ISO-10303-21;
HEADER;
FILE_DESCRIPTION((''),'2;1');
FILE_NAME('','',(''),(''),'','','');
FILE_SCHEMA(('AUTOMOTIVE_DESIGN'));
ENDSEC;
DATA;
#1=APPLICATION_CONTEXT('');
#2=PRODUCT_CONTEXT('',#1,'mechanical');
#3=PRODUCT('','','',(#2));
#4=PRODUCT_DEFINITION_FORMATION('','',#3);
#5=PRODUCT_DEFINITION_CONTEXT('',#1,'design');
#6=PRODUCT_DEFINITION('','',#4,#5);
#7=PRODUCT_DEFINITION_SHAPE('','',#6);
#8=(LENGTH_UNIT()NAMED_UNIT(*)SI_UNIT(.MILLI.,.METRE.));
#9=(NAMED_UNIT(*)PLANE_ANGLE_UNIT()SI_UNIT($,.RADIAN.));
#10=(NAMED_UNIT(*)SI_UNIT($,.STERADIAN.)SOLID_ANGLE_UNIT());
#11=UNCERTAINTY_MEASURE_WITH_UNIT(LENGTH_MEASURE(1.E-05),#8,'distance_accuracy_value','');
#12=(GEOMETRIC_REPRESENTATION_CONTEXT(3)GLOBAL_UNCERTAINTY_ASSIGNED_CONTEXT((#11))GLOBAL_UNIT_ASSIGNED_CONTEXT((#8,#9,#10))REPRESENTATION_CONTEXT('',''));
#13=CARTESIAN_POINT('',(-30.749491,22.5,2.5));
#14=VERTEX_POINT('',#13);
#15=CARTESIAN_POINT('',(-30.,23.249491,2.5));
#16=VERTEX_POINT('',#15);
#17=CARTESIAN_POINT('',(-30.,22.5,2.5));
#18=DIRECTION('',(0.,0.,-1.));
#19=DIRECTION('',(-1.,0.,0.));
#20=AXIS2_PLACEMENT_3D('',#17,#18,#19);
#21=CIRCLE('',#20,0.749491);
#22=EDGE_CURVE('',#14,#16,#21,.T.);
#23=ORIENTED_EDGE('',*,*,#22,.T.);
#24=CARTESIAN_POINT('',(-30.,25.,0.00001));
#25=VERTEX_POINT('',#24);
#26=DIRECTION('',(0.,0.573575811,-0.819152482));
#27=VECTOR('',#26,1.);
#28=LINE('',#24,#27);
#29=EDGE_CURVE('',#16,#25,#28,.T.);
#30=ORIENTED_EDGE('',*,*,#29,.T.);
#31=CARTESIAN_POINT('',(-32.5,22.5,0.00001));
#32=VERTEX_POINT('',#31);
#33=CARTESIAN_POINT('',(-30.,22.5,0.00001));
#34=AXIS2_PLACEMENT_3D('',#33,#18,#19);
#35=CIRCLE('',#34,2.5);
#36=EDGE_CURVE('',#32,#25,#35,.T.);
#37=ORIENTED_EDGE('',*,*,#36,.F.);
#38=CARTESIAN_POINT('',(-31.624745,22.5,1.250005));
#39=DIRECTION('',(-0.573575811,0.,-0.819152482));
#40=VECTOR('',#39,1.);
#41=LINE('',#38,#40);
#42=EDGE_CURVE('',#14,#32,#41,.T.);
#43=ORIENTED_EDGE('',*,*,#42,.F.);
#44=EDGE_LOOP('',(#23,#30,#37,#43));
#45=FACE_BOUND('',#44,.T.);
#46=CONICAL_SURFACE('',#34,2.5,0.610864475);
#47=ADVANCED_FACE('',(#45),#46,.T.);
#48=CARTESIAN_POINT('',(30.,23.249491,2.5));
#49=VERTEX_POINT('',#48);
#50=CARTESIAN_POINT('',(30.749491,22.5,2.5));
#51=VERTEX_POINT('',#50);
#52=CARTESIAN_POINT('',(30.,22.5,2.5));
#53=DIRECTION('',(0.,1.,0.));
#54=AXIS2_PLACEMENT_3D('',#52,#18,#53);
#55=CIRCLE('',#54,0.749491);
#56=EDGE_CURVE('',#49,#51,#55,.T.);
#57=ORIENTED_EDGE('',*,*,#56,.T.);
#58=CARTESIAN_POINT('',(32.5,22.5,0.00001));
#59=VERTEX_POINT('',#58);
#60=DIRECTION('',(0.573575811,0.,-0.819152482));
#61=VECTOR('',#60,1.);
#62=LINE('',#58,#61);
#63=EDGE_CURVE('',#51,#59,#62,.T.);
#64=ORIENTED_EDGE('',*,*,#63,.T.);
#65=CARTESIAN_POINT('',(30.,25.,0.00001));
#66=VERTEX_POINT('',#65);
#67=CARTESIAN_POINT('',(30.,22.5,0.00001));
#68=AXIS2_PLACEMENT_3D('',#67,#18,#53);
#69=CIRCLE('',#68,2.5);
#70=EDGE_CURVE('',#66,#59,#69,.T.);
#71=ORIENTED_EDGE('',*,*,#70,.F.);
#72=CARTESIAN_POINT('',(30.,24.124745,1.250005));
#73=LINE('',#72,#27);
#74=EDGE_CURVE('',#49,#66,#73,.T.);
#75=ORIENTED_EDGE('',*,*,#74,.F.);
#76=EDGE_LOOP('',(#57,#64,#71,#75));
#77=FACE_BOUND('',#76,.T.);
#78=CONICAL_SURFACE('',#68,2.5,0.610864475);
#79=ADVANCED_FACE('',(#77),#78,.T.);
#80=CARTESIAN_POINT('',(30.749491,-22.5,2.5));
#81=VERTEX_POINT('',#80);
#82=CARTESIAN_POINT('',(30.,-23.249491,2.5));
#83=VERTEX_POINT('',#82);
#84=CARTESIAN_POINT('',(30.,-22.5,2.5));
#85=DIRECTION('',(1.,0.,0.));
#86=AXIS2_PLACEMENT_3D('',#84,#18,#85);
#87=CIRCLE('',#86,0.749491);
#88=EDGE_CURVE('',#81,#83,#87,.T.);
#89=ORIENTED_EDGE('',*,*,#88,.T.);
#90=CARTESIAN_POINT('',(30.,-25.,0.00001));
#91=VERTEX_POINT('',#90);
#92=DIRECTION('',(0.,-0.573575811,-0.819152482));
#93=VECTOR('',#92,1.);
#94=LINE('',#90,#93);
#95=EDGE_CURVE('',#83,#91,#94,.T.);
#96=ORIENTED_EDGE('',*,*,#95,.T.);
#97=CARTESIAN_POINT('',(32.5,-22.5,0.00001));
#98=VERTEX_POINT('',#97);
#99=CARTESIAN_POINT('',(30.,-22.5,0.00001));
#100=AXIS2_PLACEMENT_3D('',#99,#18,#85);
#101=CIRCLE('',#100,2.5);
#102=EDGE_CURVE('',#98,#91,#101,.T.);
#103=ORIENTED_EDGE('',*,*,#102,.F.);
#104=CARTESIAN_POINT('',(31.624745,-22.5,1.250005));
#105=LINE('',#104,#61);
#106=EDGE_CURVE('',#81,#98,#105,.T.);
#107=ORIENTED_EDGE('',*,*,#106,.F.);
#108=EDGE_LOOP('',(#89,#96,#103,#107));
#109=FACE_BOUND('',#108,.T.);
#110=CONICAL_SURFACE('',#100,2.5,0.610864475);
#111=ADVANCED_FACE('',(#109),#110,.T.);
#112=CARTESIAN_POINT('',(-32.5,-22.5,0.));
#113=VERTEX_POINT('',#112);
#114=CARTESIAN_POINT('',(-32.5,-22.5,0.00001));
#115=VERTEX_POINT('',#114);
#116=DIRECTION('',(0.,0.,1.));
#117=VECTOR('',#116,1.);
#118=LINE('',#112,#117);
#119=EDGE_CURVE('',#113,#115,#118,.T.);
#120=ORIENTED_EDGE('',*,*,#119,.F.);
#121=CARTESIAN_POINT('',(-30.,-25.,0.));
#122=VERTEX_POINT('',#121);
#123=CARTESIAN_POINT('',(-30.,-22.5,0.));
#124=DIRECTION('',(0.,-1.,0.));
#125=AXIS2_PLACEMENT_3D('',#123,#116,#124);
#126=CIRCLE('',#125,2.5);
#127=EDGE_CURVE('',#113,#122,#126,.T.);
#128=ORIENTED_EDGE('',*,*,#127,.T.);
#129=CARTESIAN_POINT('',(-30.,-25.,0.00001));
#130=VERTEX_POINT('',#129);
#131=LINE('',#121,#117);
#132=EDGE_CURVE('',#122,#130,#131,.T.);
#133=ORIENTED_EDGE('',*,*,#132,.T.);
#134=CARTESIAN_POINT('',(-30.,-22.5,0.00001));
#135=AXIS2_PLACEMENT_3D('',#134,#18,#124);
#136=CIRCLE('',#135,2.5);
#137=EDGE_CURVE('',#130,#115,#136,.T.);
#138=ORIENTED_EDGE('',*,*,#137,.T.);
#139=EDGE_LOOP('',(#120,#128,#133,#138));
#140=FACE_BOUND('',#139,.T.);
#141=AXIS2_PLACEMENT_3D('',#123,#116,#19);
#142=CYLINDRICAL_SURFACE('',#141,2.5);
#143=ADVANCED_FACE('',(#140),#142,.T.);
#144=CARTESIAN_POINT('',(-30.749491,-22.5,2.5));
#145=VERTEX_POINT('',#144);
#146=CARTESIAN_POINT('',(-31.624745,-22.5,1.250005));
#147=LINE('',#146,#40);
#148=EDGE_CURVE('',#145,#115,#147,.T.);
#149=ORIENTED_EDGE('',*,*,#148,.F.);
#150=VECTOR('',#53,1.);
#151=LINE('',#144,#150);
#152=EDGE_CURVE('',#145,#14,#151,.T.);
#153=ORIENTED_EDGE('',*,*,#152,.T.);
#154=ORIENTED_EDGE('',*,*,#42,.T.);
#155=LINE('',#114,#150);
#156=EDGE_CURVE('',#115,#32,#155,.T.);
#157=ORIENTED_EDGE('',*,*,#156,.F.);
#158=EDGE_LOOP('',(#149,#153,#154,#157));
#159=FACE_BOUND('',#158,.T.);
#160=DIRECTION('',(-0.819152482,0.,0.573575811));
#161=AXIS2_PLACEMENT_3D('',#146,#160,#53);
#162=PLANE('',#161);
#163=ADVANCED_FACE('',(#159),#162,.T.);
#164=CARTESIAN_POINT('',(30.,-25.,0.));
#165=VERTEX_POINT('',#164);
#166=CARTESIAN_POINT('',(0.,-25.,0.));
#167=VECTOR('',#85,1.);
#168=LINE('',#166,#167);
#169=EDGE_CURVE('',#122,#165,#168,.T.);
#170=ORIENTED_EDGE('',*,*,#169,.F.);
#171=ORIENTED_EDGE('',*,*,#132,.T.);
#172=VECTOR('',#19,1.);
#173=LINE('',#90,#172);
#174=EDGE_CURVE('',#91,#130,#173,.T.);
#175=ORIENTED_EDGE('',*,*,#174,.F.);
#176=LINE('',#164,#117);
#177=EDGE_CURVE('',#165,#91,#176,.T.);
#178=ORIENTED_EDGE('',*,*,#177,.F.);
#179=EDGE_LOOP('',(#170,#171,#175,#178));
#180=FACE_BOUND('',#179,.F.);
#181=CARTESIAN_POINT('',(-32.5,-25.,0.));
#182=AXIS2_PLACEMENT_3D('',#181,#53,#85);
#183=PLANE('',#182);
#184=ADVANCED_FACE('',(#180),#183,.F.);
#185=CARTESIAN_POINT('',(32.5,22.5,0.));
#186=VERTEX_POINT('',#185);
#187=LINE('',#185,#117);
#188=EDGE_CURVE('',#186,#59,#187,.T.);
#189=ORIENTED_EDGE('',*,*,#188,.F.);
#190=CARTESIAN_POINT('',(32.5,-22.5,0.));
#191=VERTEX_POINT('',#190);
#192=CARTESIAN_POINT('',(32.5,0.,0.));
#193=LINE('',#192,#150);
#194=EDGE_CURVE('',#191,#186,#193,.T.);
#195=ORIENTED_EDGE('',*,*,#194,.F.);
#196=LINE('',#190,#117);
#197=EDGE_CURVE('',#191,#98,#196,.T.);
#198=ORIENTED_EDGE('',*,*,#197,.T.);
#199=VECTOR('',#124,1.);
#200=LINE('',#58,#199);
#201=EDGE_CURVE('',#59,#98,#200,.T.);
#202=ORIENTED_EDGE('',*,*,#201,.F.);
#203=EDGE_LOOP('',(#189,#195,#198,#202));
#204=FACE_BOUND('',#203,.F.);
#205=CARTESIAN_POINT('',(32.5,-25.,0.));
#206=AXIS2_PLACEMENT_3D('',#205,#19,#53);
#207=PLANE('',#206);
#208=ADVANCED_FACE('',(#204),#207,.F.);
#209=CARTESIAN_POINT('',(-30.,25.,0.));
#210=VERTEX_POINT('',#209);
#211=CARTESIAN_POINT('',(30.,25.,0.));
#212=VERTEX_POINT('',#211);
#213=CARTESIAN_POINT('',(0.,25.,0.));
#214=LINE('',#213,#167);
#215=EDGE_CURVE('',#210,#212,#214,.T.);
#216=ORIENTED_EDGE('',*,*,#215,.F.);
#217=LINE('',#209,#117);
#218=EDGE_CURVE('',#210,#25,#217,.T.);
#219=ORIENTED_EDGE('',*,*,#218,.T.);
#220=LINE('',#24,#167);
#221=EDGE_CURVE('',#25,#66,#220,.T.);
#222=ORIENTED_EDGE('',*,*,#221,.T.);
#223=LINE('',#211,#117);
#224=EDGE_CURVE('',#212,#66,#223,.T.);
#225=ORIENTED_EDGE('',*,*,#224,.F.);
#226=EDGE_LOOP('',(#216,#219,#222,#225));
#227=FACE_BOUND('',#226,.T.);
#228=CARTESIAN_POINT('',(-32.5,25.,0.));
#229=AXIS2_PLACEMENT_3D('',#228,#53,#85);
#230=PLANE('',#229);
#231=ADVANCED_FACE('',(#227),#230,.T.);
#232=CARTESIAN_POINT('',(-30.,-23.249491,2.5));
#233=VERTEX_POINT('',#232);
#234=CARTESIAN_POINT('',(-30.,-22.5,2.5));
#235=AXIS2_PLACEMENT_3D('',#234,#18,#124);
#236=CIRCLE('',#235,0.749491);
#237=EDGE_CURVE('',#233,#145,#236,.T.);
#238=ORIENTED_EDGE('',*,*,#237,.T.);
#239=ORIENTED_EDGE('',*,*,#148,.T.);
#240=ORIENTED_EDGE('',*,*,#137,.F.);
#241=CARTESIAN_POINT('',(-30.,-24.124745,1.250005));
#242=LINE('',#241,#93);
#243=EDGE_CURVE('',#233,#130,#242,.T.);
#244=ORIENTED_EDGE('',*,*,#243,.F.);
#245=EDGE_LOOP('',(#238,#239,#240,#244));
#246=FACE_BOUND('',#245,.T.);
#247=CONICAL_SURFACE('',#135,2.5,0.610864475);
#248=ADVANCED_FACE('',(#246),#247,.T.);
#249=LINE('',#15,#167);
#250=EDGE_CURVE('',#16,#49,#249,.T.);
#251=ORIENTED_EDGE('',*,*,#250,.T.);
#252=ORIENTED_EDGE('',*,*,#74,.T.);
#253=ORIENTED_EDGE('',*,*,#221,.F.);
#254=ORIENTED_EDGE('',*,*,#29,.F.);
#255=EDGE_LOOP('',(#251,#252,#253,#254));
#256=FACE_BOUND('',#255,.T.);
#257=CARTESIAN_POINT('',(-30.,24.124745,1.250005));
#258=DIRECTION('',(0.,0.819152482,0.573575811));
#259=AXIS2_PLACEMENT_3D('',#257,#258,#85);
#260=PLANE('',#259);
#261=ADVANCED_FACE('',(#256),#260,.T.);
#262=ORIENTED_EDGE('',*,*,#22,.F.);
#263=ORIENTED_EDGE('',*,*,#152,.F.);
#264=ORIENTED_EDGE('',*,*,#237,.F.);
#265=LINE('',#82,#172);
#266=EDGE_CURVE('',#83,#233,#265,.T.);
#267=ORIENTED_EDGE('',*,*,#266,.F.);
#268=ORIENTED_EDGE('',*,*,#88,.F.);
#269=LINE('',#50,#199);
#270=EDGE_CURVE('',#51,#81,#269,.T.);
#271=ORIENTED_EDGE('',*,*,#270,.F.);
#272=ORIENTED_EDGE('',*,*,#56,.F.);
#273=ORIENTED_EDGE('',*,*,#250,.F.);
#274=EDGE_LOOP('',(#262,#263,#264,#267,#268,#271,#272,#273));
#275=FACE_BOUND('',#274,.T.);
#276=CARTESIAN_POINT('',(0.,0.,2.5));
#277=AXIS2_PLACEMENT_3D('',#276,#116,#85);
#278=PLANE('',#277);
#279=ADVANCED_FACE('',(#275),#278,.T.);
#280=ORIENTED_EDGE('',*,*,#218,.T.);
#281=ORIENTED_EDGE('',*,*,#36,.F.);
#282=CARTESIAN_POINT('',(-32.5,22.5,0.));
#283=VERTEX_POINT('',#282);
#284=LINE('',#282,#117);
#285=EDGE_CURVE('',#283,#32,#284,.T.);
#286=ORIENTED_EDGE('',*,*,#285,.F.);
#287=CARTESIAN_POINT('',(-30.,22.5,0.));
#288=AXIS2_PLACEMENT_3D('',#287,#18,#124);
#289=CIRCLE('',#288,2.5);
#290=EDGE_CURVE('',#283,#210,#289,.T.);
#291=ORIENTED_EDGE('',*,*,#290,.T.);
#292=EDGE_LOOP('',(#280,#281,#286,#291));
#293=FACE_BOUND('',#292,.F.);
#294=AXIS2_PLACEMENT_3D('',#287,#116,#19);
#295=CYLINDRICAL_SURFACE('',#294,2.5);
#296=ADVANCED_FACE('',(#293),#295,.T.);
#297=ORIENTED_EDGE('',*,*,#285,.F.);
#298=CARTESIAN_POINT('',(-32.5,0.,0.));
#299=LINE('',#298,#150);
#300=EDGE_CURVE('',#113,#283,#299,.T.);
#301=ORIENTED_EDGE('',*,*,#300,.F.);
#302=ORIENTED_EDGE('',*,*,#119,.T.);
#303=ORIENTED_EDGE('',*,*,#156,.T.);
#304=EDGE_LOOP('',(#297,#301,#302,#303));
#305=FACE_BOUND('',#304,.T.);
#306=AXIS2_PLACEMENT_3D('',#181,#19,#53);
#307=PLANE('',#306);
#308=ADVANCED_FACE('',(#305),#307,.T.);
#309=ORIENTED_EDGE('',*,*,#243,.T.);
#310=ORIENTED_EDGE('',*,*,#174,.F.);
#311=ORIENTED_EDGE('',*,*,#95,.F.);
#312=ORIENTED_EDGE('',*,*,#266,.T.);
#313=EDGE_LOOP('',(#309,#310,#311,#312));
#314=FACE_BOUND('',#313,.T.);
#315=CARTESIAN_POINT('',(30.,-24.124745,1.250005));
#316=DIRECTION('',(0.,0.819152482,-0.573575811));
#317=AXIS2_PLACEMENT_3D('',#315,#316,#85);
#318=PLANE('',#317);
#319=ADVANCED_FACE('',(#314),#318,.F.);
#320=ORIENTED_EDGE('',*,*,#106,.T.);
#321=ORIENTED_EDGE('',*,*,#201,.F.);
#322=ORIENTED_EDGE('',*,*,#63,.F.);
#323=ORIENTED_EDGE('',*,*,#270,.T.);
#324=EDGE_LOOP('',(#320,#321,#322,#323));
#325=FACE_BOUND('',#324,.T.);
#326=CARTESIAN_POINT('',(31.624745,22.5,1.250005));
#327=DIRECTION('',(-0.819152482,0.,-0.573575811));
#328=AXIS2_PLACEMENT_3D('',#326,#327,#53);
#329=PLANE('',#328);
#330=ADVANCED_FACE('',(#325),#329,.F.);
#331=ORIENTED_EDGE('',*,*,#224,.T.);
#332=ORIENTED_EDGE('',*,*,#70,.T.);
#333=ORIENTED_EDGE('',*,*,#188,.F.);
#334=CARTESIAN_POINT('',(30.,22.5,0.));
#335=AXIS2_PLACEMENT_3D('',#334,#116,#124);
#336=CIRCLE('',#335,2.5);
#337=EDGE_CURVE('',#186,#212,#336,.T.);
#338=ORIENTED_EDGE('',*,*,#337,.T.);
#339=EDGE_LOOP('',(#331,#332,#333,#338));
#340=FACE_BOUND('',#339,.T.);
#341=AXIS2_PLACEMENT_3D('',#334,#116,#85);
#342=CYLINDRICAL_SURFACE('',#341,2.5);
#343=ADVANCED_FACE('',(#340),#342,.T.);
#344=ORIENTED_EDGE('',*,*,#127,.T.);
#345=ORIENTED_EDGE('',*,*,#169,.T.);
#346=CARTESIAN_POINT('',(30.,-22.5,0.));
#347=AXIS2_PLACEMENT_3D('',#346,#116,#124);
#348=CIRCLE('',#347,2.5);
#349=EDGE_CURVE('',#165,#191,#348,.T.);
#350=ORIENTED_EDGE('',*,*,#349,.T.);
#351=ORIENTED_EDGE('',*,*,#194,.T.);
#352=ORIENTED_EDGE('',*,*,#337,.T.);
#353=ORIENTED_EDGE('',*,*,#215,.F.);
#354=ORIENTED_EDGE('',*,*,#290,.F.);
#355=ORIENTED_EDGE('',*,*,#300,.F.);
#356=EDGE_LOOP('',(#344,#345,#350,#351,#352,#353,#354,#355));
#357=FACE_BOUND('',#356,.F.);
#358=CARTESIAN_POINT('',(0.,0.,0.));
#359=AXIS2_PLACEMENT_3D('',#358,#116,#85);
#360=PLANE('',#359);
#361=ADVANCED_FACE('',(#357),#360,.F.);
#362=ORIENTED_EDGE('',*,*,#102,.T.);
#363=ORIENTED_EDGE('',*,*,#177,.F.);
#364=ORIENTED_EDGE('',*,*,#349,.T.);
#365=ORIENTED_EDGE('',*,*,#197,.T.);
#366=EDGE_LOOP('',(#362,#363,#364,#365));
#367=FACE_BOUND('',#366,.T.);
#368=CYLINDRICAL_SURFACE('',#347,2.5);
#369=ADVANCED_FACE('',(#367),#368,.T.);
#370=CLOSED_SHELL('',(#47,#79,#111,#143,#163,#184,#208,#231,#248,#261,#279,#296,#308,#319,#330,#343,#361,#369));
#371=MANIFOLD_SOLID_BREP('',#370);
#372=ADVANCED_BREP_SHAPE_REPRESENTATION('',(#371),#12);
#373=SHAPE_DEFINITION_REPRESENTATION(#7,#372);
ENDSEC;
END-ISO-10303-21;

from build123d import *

# Parameters (mm, degrees)
F0_W     = 65
F0_H     = 50
F1_DEPTH = 2.5
F2_R     = 2.5
F3_SIZE2 = 2.49999
F3_SIZE  = 1.750509


# Not quite as in the source:
# - a fillet or chamfer is up to 0.001 mm smaller than in the source, because OpenCascade refuses the exact size


with BuildPart() as f1:
    # F0 (on Top) → F1 (new body)
    with BuildSketch(Plane.XY):
        Rectangle(F0_W, F0_H)
    extrude(amount=F1_DEPTH)

    # F2
    f2_edges = [f1.edges().sort_by_distance(p)[0] for p in [
        (-32.5, -25, 1.25),
        (32.5, -25, 1.25),
        (32.5, 25, 1.25),
        (-32.5, 25, 1.25),
    ]]
    fillet(f2_edges, radius=F2_R)

    # F3 (size 1.7505188455 and 2.5 in the source; OpenCascade refuses exactly that, so slightly less here)
    f3_edges = [f1.edges().sort_by_distance(p)[0] for p in [
        (-32.5, 0, 2.5),
        (-31.767767, 24.267767, 2.5),
        (0, 25, 2.5),
        (31.767767, 24.267767, 2.5),
        (32.5, 0, 2.5),
        (31.767767, -24.267767, 2.5),
        (0, -25, 2.5),
        (-31.767767, -24.267767, 2.5),
    ]]
    f3_side = f1.faces().sort_by_distance((0, 0, 2.5))[0]
    chamfer(f3_edges, length=F3_SIZE, length2=F3_SIZE2, reference=f3_side)


solid = f1.part
